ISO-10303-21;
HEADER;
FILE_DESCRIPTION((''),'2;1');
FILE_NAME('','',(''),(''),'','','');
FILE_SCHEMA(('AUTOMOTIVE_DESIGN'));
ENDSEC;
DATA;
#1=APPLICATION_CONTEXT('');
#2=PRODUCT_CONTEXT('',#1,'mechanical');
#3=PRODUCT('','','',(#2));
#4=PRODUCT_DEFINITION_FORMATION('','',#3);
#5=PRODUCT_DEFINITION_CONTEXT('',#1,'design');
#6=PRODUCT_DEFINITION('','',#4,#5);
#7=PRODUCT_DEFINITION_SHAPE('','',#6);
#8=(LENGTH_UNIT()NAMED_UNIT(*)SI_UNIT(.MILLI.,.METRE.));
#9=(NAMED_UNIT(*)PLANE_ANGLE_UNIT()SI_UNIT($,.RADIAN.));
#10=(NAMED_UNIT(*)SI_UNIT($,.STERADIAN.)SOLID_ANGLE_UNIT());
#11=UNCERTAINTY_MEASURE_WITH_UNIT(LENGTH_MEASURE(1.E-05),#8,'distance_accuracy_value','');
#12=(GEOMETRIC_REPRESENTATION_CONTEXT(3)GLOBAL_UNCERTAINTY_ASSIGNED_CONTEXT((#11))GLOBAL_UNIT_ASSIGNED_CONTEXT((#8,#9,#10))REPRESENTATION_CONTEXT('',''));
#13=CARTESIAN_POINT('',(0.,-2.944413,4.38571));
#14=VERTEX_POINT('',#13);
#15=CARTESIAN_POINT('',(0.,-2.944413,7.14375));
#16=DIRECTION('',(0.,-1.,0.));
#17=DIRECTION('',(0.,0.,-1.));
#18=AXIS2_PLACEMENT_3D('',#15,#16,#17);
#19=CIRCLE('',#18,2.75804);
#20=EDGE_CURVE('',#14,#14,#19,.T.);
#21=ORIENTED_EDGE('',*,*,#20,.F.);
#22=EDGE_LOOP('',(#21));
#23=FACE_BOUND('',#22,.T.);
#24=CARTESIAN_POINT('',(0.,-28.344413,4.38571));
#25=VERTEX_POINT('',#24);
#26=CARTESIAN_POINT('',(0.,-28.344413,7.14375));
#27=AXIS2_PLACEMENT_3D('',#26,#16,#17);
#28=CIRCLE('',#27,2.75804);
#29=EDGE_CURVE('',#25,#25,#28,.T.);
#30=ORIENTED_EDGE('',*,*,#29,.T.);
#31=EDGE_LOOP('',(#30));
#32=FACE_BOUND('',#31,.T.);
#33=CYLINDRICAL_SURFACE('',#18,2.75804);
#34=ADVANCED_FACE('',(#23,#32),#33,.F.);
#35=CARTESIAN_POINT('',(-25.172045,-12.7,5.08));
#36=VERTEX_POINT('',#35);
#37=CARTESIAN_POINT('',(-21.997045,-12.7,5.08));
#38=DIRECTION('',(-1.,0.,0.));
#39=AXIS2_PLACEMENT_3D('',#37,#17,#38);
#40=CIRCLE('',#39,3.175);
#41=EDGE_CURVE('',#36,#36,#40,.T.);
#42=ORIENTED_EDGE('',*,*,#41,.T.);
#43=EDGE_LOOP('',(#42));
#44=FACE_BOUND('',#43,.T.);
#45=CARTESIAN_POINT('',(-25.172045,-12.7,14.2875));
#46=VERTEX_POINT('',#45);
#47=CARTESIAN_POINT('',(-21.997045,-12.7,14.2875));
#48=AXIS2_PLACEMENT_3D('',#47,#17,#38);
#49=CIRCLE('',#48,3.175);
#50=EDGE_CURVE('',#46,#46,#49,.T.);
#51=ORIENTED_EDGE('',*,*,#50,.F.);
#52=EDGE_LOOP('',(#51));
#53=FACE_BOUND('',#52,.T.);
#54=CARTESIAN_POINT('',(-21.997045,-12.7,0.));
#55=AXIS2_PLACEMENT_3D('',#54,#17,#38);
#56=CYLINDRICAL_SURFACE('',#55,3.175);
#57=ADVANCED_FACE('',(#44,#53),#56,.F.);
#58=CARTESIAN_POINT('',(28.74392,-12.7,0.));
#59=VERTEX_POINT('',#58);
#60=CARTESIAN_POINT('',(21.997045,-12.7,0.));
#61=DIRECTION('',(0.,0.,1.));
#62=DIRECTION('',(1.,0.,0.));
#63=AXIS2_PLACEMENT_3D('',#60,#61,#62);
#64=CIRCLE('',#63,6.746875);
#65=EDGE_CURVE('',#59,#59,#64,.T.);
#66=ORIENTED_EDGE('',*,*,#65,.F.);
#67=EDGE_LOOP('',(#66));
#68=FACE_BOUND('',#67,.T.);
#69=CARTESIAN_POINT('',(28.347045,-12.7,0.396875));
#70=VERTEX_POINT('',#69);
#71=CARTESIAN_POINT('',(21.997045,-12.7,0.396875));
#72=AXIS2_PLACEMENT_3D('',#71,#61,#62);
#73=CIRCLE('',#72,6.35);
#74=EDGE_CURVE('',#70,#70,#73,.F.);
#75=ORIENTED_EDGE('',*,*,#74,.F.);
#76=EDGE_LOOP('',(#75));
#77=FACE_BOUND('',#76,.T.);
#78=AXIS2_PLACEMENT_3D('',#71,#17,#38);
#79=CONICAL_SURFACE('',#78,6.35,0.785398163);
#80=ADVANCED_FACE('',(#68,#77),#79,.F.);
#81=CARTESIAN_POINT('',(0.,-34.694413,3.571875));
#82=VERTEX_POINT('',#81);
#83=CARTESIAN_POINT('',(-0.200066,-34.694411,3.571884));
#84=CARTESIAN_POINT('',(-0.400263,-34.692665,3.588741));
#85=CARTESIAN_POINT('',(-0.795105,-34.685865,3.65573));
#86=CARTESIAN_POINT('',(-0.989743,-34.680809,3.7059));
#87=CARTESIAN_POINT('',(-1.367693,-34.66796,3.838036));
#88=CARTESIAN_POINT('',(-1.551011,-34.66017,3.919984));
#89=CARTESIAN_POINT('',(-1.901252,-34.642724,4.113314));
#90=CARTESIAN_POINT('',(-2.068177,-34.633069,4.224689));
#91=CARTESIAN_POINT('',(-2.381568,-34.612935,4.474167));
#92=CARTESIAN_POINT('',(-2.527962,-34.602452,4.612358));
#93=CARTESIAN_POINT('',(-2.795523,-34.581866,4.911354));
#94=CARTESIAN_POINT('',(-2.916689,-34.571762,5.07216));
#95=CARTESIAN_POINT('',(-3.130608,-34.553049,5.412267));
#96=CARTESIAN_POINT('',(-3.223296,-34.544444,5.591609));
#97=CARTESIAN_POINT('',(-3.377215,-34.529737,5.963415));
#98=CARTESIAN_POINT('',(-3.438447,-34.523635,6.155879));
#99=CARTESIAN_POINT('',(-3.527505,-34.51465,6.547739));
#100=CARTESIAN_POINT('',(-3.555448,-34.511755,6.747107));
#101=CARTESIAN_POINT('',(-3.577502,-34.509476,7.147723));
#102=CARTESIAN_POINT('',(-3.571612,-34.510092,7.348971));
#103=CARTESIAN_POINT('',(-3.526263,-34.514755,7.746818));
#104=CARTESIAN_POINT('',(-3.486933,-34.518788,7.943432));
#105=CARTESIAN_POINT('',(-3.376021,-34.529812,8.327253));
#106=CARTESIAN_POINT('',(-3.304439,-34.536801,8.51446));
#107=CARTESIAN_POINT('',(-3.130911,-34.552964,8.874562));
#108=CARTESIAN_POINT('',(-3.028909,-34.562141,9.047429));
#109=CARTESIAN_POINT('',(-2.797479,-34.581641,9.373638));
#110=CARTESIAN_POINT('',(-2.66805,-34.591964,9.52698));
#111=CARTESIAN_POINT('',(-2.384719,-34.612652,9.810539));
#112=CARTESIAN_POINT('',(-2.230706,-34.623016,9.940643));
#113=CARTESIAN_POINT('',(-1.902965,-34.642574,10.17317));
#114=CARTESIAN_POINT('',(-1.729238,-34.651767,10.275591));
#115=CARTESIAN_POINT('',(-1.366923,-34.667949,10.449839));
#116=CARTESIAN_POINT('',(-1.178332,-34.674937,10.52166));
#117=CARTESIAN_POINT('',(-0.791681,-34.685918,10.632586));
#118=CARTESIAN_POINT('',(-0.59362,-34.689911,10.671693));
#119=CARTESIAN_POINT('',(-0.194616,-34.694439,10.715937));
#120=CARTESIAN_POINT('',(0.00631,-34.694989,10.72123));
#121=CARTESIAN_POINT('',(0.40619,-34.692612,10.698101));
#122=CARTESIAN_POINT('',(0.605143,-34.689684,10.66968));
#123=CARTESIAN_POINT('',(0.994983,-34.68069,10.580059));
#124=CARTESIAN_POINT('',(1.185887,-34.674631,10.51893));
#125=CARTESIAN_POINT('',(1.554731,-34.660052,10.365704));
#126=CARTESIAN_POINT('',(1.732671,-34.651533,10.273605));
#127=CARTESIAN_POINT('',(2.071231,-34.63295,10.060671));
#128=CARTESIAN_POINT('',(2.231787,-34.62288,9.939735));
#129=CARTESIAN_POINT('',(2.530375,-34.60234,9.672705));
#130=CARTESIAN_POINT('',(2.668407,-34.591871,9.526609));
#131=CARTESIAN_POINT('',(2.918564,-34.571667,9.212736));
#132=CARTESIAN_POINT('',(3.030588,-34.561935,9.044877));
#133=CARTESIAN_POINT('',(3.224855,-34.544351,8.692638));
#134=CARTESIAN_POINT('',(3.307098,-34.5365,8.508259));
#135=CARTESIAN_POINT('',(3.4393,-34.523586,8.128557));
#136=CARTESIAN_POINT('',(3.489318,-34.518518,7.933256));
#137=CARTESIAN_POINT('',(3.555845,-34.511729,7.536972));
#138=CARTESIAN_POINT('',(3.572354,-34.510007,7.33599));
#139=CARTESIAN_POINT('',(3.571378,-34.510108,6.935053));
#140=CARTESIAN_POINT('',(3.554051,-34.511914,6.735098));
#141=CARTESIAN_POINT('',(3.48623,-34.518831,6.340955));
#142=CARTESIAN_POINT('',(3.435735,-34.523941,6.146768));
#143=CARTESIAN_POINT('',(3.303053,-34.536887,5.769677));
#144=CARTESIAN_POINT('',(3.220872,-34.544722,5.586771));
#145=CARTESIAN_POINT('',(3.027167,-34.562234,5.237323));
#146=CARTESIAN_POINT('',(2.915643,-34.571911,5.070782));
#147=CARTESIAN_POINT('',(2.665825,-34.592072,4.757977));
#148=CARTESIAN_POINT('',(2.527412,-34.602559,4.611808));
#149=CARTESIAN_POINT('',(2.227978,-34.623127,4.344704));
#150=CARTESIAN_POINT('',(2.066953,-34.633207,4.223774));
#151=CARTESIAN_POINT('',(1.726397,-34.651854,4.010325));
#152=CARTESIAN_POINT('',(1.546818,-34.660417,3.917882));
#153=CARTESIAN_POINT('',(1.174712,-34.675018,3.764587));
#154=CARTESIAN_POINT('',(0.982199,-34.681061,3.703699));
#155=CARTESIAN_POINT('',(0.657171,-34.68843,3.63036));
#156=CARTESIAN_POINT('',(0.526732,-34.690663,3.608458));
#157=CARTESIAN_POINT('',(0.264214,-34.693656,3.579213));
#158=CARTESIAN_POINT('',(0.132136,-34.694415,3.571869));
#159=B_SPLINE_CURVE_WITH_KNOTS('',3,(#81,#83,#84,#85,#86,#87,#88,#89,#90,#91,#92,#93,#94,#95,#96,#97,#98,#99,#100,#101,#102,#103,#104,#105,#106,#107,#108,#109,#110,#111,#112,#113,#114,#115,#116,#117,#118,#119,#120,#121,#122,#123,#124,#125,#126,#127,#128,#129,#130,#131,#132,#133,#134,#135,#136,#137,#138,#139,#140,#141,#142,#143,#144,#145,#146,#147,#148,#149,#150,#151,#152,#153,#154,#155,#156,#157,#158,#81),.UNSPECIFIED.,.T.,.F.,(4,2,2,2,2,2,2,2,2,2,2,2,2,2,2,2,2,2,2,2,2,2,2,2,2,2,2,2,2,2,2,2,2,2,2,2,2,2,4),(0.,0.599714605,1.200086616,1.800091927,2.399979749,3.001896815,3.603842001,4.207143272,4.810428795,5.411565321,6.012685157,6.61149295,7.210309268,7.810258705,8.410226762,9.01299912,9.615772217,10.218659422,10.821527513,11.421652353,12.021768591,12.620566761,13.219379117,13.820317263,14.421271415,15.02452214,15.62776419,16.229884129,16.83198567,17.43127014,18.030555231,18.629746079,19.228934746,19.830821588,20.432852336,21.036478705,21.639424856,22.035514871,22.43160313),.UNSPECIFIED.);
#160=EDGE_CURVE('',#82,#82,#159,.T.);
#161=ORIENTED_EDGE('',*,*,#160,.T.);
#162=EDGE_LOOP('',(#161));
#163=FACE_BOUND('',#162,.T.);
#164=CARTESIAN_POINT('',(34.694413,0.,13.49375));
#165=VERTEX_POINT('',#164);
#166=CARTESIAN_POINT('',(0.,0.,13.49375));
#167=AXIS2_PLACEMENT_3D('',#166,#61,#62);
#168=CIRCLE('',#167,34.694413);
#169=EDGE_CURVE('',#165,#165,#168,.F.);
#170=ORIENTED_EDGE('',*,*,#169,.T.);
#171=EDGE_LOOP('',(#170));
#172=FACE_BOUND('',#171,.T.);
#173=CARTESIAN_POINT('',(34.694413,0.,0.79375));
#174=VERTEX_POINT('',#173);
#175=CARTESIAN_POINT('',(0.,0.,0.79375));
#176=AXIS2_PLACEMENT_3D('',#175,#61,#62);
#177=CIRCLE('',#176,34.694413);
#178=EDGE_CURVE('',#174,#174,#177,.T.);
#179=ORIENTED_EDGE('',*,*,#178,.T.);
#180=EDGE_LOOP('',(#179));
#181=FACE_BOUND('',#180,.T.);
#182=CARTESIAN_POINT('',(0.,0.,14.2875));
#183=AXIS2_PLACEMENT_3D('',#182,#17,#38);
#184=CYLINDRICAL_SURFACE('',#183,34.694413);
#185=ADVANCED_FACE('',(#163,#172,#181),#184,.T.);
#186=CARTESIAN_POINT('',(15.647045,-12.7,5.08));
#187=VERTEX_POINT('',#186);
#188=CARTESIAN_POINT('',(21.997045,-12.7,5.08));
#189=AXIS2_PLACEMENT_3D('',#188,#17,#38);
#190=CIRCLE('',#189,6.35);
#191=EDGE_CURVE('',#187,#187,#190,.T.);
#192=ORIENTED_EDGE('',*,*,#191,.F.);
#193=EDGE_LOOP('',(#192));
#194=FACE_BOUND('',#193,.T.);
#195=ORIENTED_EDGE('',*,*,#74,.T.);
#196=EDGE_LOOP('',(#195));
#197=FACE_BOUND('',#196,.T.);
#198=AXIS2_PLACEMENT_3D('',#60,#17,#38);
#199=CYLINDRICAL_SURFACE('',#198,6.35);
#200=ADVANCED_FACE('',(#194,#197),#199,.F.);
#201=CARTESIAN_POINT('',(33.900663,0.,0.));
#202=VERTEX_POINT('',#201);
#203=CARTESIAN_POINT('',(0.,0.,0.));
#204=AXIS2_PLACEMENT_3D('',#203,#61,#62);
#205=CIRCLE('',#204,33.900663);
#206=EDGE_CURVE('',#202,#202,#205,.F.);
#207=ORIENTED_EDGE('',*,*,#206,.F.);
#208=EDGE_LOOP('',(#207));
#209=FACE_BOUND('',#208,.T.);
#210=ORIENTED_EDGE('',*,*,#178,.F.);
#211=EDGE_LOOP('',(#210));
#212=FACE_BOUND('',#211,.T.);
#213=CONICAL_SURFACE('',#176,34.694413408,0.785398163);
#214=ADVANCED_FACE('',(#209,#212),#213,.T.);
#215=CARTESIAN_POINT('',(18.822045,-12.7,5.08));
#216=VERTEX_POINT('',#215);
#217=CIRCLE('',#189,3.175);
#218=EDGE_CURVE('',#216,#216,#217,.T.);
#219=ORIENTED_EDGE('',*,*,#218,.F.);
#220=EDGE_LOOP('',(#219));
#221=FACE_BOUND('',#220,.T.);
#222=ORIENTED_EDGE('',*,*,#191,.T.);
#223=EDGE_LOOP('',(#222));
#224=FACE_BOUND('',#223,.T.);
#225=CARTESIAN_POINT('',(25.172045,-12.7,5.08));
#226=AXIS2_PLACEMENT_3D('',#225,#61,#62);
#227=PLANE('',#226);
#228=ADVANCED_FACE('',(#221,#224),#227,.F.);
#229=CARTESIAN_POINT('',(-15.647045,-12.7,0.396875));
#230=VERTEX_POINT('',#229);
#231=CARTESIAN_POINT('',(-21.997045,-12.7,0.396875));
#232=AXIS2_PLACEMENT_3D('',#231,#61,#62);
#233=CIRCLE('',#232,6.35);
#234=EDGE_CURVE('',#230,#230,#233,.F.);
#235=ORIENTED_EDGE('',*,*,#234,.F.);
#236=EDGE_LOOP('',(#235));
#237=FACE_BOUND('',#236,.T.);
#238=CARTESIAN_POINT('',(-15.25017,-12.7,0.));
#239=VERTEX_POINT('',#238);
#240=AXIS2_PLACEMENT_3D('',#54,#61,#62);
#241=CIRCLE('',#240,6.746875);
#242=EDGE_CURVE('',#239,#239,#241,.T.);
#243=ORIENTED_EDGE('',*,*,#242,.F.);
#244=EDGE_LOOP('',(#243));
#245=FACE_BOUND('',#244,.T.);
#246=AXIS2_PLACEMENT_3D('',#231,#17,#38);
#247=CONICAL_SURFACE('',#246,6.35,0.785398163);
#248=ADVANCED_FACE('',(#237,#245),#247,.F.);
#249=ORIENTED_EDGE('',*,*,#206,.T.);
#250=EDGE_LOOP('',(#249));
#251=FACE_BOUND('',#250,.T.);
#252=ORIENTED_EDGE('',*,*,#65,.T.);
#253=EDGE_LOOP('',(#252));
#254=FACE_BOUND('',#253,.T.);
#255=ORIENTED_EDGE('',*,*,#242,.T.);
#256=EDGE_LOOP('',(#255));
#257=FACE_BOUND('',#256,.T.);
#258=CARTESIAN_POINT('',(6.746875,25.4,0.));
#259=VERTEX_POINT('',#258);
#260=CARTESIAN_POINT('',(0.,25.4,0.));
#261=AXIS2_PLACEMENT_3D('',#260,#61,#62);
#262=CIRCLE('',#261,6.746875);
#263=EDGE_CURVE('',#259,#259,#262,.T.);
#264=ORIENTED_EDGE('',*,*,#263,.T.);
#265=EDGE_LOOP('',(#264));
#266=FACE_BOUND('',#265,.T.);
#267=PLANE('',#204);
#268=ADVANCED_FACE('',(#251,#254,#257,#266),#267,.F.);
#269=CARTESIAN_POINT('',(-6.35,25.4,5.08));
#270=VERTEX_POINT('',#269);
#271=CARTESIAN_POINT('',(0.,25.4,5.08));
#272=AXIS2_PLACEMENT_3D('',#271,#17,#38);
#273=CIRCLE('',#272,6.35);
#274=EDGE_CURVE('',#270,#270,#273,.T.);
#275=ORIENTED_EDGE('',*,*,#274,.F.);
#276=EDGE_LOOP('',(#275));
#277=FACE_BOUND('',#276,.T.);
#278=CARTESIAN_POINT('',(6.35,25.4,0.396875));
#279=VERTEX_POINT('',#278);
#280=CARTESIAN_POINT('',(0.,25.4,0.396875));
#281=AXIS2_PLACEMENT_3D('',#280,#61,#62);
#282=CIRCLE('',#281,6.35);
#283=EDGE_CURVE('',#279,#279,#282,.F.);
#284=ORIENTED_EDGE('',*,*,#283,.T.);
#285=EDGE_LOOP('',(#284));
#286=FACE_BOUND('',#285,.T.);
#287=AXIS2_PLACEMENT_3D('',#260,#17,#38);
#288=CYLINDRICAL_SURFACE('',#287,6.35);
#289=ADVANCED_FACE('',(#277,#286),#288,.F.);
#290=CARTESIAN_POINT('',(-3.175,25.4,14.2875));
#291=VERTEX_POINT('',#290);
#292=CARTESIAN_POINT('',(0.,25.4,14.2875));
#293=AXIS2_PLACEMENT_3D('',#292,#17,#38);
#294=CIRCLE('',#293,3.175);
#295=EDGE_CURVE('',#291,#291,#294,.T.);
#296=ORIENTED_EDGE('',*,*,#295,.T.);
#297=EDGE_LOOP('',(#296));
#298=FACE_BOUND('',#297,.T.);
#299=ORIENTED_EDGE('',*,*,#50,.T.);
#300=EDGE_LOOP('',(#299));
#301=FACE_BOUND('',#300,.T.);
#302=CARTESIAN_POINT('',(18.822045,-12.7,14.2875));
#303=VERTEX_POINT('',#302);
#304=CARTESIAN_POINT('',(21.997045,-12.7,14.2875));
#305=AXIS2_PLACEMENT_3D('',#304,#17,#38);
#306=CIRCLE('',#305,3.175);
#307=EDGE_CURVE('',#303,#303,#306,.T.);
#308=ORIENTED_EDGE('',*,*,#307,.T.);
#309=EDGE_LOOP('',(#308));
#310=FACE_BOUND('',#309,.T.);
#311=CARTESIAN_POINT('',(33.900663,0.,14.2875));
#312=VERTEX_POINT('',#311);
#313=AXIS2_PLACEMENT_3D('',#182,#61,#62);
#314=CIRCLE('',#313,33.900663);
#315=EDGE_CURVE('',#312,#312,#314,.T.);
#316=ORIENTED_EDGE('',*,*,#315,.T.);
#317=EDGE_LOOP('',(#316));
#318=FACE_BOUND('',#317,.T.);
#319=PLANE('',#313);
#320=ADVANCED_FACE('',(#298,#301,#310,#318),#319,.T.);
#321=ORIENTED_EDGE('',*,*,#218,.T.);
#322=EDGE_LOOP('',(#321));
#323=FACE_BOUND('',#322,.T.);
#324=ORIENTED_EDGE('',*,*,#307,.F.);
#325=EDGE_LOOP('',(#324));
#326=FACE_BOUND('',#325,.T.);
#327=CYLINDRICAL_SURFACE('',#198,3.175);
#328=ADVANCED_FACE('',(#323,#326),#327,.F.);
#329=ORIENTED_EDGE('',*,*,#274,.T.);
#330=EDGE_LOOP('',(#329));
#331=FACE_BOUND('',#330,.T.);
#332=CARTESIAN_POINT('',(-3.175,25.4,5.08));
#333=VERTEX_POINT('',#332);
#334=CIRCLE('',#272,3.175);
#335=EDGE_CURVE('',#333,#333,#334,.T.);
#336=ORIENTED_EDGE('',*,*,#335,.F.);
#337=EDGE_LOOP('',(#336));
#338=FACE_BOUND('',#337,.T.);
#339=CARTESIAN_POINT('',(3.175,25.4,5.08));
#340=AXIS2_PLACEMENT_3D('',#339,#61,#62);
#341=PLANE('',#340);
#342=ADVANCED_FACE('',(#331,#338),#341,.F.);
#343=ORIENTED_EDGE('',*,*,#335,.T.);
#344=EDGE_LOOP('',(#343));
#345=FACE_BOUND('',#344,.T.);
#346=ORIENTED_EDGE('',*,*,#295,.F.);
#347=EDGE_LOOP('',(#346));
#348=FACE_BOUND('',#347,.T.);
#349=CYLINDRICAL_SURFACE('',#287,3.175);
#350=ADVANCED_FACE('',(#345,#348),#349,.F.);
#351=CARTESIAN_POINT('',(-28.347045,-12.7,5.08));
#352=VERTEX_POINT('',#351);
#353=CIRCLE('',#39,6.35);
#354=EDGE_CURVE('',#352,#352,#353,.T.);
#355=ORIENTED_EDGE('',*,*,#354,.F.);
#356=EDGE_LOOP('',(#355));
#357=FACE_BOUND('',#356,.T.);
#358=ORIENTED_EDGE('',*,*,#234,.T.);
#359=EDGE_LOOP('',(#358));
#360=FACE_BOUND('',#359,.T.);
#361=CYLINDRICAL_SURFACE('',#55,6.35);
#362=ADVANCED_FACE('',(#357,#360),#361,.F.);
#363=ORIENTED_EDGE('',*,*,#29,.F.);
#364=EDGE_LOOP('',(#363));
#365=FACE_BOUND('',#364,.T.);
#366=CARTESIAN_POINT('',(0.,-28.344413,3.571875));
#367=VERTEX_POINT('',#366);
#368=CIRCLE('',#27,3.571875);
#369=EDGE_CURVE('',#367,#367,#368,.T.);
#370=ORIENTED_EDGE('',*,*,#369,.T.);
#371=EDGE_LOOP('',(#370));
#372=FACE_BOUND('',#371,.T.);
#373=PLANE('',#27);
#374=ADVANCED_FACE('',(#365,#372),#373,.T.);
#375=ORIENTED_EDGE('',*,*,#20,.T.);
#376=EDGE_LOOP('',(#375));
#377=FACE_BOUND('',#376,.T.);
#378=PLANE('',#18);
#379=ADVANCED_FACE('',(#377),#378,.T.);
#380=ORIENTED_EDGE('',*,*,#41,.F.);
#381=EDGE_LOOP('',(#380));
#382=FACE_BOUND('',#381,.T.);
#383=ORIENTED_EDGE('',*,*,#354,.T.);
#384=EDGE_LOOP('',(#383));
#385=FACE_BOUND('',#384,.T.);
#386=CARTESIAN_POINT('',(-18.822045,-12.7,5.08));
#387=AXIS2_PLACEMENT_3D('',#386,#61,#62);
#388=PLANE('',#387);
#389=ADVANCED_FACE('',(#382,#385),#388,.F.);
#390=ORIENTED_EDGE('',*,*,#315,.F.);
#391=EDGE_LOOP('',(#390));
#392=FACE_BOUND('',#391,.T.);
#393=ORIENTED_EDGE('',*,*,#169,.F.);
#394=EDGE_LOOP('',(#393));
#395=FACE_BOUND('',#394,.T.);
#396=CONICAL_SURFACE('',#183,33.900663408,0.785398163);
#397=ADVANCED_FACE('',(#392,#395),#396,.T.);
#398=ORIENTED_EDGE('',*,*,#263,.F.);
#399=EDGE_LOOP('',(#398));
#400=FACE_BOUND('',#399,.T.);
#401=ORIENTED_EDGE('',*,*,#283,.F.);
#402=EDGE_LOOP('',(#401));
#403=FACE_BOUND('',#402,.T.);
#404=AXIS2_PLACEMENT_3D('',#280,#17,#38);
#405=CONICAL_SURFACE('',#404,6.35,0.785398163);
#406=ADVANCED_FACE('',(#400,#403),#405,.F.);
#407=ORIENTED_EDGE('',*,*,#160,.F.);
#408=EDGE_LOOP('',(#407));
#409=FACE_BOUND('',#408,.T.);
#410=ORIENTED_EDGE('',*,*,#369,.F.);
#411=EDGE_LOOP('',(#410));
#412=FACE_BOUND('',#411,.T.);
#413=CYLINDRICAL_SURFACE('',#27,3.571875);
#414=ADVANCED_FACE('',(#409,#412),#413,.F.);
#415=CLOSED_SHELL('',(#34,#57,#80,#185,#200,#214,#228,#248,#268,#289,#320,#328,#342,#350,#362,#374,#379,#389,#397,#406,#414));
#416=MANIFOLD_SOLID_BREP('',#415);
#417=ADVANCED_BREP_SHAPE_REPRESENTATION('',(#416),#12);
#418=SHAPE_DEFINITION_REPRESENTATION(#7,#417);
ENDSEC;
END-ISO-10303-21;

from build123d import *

# Parameters (mm, degrees)
SKETCH1_R           = 34.694413408
BOSS_EXTRUDE1_DEPTH = 14.2875
HOLE1_OUTLINE_R     = 6.35
HOLE1_DEPTH         = 5.08
HOLE1_START         = 5.08
HOLE1_2_OUTLINE_R   = 3.175
HOLE1_2_DEPTH       = 9.2075
CHAMFER1_SIZE       = 0.79375
SKETCH9_R           = 3.571875
CUT_EXTRUDE1_DEPTH  = 6.35
SKETCH10_R          = 2.758039836
CUT_EXTRUDE2_DEPTH  = 25.4
CHAMFER2_SIZE       = 0.396875


# Read off the part's stored shape, not the designer's step: Hole1
with BuildPart() as part:
    # Sketch1 → Boss-Extrude1 (new body)
    with BuildSketch(Plane.XY):
        Circle(SKETCH1_R)
    extrude(amount=BOSS_EXTRUDE1_DEPTH)

    # Hole1 outline → Hole1 (cut)
    with BuildSketch(Plane.XY):
        with Locations((21.997045256, -12.7)):
            Circle(HOLE1_OUTLINE_R)
        with Locations((-21.997045256, -12.7)):
            Circle(HOLE1_OUTLINE_R)
        with Locations((0, 25.4)):
            Circle(HOLE1_OUTLINE_R)
    extrude(amount=HOLE1_DEPTH, mode=Mode.SUBTRACT)

    # Hole1 2 outline → Hole1 2 (cut)
    with BuildSketch(Plane.XY.offset(HOLE1_START)):
        with Locations((21.997045256, -12.7)):
            Circle(HOLE1_2_OUTLINE_R)
        with Locations((-21.997045256, -12.7)):
            Circle(HOLE1_2_OUTLINE_R)
        with Locations((0, 25.4)):
            Circle(HOLE1_2_OUTLINE_R)
    extrude(amount=HOLE1_2_DEPTH, mode=Mode.SUBTRACT)

    # Chamfer1
    chamfer1_edges = [part.edges().sort_by_distance(p)[0] for p in [
        (-34.694413408, 0, 0),
        (-34.694413408, 0, 14.2875),
    ]]
    chamfer(chamfer1_edges, length=CHAMFER1_SIZE)

    # Sketch9 → Cut-Extrude1 (cut)
    with BuildSketch(Plane(origin=(0, -34.694413408, 0), x_dir=(-1, 0, 0), z_dir=(0, -1, 0))):
        with Locations(Location((0, -7.14375, 0), (0, 0, 90))):
            Circle(SKETCH9_R)
    extrude(amount=-CUT_EXTRUDE1_DEPTH, mode=Mode.SUBTRACT)

    # Sketch10 → Cut-Extrude2 (cut)
    with BuildSketch(Plane(origin=(0, -28.344413408, 0), x_dir=(-1, 0, 0), z_dir=(0, -1, 0))):
        with Locations(Location((0, -7.14375, 0), (0, 0, 90))):
            Circle(SKETCH10_R)
    extrude(amount=-CUT_EXTRUDE2_DEPTH, mode=Mode.SUBTRACT)

    # Chamfer2
    chamfer2_edges = [part.edges().sort_by_distance(p)[0] for p in [
        (-28.347045256, -12.7, 0),
        (-6.35, 25.4, 0),
        (15.647045256, -12.7, 0),
    ]]
    chamfer(chamfer2_edges, length=CHAMFER2_SIZE)


solid = part.part
